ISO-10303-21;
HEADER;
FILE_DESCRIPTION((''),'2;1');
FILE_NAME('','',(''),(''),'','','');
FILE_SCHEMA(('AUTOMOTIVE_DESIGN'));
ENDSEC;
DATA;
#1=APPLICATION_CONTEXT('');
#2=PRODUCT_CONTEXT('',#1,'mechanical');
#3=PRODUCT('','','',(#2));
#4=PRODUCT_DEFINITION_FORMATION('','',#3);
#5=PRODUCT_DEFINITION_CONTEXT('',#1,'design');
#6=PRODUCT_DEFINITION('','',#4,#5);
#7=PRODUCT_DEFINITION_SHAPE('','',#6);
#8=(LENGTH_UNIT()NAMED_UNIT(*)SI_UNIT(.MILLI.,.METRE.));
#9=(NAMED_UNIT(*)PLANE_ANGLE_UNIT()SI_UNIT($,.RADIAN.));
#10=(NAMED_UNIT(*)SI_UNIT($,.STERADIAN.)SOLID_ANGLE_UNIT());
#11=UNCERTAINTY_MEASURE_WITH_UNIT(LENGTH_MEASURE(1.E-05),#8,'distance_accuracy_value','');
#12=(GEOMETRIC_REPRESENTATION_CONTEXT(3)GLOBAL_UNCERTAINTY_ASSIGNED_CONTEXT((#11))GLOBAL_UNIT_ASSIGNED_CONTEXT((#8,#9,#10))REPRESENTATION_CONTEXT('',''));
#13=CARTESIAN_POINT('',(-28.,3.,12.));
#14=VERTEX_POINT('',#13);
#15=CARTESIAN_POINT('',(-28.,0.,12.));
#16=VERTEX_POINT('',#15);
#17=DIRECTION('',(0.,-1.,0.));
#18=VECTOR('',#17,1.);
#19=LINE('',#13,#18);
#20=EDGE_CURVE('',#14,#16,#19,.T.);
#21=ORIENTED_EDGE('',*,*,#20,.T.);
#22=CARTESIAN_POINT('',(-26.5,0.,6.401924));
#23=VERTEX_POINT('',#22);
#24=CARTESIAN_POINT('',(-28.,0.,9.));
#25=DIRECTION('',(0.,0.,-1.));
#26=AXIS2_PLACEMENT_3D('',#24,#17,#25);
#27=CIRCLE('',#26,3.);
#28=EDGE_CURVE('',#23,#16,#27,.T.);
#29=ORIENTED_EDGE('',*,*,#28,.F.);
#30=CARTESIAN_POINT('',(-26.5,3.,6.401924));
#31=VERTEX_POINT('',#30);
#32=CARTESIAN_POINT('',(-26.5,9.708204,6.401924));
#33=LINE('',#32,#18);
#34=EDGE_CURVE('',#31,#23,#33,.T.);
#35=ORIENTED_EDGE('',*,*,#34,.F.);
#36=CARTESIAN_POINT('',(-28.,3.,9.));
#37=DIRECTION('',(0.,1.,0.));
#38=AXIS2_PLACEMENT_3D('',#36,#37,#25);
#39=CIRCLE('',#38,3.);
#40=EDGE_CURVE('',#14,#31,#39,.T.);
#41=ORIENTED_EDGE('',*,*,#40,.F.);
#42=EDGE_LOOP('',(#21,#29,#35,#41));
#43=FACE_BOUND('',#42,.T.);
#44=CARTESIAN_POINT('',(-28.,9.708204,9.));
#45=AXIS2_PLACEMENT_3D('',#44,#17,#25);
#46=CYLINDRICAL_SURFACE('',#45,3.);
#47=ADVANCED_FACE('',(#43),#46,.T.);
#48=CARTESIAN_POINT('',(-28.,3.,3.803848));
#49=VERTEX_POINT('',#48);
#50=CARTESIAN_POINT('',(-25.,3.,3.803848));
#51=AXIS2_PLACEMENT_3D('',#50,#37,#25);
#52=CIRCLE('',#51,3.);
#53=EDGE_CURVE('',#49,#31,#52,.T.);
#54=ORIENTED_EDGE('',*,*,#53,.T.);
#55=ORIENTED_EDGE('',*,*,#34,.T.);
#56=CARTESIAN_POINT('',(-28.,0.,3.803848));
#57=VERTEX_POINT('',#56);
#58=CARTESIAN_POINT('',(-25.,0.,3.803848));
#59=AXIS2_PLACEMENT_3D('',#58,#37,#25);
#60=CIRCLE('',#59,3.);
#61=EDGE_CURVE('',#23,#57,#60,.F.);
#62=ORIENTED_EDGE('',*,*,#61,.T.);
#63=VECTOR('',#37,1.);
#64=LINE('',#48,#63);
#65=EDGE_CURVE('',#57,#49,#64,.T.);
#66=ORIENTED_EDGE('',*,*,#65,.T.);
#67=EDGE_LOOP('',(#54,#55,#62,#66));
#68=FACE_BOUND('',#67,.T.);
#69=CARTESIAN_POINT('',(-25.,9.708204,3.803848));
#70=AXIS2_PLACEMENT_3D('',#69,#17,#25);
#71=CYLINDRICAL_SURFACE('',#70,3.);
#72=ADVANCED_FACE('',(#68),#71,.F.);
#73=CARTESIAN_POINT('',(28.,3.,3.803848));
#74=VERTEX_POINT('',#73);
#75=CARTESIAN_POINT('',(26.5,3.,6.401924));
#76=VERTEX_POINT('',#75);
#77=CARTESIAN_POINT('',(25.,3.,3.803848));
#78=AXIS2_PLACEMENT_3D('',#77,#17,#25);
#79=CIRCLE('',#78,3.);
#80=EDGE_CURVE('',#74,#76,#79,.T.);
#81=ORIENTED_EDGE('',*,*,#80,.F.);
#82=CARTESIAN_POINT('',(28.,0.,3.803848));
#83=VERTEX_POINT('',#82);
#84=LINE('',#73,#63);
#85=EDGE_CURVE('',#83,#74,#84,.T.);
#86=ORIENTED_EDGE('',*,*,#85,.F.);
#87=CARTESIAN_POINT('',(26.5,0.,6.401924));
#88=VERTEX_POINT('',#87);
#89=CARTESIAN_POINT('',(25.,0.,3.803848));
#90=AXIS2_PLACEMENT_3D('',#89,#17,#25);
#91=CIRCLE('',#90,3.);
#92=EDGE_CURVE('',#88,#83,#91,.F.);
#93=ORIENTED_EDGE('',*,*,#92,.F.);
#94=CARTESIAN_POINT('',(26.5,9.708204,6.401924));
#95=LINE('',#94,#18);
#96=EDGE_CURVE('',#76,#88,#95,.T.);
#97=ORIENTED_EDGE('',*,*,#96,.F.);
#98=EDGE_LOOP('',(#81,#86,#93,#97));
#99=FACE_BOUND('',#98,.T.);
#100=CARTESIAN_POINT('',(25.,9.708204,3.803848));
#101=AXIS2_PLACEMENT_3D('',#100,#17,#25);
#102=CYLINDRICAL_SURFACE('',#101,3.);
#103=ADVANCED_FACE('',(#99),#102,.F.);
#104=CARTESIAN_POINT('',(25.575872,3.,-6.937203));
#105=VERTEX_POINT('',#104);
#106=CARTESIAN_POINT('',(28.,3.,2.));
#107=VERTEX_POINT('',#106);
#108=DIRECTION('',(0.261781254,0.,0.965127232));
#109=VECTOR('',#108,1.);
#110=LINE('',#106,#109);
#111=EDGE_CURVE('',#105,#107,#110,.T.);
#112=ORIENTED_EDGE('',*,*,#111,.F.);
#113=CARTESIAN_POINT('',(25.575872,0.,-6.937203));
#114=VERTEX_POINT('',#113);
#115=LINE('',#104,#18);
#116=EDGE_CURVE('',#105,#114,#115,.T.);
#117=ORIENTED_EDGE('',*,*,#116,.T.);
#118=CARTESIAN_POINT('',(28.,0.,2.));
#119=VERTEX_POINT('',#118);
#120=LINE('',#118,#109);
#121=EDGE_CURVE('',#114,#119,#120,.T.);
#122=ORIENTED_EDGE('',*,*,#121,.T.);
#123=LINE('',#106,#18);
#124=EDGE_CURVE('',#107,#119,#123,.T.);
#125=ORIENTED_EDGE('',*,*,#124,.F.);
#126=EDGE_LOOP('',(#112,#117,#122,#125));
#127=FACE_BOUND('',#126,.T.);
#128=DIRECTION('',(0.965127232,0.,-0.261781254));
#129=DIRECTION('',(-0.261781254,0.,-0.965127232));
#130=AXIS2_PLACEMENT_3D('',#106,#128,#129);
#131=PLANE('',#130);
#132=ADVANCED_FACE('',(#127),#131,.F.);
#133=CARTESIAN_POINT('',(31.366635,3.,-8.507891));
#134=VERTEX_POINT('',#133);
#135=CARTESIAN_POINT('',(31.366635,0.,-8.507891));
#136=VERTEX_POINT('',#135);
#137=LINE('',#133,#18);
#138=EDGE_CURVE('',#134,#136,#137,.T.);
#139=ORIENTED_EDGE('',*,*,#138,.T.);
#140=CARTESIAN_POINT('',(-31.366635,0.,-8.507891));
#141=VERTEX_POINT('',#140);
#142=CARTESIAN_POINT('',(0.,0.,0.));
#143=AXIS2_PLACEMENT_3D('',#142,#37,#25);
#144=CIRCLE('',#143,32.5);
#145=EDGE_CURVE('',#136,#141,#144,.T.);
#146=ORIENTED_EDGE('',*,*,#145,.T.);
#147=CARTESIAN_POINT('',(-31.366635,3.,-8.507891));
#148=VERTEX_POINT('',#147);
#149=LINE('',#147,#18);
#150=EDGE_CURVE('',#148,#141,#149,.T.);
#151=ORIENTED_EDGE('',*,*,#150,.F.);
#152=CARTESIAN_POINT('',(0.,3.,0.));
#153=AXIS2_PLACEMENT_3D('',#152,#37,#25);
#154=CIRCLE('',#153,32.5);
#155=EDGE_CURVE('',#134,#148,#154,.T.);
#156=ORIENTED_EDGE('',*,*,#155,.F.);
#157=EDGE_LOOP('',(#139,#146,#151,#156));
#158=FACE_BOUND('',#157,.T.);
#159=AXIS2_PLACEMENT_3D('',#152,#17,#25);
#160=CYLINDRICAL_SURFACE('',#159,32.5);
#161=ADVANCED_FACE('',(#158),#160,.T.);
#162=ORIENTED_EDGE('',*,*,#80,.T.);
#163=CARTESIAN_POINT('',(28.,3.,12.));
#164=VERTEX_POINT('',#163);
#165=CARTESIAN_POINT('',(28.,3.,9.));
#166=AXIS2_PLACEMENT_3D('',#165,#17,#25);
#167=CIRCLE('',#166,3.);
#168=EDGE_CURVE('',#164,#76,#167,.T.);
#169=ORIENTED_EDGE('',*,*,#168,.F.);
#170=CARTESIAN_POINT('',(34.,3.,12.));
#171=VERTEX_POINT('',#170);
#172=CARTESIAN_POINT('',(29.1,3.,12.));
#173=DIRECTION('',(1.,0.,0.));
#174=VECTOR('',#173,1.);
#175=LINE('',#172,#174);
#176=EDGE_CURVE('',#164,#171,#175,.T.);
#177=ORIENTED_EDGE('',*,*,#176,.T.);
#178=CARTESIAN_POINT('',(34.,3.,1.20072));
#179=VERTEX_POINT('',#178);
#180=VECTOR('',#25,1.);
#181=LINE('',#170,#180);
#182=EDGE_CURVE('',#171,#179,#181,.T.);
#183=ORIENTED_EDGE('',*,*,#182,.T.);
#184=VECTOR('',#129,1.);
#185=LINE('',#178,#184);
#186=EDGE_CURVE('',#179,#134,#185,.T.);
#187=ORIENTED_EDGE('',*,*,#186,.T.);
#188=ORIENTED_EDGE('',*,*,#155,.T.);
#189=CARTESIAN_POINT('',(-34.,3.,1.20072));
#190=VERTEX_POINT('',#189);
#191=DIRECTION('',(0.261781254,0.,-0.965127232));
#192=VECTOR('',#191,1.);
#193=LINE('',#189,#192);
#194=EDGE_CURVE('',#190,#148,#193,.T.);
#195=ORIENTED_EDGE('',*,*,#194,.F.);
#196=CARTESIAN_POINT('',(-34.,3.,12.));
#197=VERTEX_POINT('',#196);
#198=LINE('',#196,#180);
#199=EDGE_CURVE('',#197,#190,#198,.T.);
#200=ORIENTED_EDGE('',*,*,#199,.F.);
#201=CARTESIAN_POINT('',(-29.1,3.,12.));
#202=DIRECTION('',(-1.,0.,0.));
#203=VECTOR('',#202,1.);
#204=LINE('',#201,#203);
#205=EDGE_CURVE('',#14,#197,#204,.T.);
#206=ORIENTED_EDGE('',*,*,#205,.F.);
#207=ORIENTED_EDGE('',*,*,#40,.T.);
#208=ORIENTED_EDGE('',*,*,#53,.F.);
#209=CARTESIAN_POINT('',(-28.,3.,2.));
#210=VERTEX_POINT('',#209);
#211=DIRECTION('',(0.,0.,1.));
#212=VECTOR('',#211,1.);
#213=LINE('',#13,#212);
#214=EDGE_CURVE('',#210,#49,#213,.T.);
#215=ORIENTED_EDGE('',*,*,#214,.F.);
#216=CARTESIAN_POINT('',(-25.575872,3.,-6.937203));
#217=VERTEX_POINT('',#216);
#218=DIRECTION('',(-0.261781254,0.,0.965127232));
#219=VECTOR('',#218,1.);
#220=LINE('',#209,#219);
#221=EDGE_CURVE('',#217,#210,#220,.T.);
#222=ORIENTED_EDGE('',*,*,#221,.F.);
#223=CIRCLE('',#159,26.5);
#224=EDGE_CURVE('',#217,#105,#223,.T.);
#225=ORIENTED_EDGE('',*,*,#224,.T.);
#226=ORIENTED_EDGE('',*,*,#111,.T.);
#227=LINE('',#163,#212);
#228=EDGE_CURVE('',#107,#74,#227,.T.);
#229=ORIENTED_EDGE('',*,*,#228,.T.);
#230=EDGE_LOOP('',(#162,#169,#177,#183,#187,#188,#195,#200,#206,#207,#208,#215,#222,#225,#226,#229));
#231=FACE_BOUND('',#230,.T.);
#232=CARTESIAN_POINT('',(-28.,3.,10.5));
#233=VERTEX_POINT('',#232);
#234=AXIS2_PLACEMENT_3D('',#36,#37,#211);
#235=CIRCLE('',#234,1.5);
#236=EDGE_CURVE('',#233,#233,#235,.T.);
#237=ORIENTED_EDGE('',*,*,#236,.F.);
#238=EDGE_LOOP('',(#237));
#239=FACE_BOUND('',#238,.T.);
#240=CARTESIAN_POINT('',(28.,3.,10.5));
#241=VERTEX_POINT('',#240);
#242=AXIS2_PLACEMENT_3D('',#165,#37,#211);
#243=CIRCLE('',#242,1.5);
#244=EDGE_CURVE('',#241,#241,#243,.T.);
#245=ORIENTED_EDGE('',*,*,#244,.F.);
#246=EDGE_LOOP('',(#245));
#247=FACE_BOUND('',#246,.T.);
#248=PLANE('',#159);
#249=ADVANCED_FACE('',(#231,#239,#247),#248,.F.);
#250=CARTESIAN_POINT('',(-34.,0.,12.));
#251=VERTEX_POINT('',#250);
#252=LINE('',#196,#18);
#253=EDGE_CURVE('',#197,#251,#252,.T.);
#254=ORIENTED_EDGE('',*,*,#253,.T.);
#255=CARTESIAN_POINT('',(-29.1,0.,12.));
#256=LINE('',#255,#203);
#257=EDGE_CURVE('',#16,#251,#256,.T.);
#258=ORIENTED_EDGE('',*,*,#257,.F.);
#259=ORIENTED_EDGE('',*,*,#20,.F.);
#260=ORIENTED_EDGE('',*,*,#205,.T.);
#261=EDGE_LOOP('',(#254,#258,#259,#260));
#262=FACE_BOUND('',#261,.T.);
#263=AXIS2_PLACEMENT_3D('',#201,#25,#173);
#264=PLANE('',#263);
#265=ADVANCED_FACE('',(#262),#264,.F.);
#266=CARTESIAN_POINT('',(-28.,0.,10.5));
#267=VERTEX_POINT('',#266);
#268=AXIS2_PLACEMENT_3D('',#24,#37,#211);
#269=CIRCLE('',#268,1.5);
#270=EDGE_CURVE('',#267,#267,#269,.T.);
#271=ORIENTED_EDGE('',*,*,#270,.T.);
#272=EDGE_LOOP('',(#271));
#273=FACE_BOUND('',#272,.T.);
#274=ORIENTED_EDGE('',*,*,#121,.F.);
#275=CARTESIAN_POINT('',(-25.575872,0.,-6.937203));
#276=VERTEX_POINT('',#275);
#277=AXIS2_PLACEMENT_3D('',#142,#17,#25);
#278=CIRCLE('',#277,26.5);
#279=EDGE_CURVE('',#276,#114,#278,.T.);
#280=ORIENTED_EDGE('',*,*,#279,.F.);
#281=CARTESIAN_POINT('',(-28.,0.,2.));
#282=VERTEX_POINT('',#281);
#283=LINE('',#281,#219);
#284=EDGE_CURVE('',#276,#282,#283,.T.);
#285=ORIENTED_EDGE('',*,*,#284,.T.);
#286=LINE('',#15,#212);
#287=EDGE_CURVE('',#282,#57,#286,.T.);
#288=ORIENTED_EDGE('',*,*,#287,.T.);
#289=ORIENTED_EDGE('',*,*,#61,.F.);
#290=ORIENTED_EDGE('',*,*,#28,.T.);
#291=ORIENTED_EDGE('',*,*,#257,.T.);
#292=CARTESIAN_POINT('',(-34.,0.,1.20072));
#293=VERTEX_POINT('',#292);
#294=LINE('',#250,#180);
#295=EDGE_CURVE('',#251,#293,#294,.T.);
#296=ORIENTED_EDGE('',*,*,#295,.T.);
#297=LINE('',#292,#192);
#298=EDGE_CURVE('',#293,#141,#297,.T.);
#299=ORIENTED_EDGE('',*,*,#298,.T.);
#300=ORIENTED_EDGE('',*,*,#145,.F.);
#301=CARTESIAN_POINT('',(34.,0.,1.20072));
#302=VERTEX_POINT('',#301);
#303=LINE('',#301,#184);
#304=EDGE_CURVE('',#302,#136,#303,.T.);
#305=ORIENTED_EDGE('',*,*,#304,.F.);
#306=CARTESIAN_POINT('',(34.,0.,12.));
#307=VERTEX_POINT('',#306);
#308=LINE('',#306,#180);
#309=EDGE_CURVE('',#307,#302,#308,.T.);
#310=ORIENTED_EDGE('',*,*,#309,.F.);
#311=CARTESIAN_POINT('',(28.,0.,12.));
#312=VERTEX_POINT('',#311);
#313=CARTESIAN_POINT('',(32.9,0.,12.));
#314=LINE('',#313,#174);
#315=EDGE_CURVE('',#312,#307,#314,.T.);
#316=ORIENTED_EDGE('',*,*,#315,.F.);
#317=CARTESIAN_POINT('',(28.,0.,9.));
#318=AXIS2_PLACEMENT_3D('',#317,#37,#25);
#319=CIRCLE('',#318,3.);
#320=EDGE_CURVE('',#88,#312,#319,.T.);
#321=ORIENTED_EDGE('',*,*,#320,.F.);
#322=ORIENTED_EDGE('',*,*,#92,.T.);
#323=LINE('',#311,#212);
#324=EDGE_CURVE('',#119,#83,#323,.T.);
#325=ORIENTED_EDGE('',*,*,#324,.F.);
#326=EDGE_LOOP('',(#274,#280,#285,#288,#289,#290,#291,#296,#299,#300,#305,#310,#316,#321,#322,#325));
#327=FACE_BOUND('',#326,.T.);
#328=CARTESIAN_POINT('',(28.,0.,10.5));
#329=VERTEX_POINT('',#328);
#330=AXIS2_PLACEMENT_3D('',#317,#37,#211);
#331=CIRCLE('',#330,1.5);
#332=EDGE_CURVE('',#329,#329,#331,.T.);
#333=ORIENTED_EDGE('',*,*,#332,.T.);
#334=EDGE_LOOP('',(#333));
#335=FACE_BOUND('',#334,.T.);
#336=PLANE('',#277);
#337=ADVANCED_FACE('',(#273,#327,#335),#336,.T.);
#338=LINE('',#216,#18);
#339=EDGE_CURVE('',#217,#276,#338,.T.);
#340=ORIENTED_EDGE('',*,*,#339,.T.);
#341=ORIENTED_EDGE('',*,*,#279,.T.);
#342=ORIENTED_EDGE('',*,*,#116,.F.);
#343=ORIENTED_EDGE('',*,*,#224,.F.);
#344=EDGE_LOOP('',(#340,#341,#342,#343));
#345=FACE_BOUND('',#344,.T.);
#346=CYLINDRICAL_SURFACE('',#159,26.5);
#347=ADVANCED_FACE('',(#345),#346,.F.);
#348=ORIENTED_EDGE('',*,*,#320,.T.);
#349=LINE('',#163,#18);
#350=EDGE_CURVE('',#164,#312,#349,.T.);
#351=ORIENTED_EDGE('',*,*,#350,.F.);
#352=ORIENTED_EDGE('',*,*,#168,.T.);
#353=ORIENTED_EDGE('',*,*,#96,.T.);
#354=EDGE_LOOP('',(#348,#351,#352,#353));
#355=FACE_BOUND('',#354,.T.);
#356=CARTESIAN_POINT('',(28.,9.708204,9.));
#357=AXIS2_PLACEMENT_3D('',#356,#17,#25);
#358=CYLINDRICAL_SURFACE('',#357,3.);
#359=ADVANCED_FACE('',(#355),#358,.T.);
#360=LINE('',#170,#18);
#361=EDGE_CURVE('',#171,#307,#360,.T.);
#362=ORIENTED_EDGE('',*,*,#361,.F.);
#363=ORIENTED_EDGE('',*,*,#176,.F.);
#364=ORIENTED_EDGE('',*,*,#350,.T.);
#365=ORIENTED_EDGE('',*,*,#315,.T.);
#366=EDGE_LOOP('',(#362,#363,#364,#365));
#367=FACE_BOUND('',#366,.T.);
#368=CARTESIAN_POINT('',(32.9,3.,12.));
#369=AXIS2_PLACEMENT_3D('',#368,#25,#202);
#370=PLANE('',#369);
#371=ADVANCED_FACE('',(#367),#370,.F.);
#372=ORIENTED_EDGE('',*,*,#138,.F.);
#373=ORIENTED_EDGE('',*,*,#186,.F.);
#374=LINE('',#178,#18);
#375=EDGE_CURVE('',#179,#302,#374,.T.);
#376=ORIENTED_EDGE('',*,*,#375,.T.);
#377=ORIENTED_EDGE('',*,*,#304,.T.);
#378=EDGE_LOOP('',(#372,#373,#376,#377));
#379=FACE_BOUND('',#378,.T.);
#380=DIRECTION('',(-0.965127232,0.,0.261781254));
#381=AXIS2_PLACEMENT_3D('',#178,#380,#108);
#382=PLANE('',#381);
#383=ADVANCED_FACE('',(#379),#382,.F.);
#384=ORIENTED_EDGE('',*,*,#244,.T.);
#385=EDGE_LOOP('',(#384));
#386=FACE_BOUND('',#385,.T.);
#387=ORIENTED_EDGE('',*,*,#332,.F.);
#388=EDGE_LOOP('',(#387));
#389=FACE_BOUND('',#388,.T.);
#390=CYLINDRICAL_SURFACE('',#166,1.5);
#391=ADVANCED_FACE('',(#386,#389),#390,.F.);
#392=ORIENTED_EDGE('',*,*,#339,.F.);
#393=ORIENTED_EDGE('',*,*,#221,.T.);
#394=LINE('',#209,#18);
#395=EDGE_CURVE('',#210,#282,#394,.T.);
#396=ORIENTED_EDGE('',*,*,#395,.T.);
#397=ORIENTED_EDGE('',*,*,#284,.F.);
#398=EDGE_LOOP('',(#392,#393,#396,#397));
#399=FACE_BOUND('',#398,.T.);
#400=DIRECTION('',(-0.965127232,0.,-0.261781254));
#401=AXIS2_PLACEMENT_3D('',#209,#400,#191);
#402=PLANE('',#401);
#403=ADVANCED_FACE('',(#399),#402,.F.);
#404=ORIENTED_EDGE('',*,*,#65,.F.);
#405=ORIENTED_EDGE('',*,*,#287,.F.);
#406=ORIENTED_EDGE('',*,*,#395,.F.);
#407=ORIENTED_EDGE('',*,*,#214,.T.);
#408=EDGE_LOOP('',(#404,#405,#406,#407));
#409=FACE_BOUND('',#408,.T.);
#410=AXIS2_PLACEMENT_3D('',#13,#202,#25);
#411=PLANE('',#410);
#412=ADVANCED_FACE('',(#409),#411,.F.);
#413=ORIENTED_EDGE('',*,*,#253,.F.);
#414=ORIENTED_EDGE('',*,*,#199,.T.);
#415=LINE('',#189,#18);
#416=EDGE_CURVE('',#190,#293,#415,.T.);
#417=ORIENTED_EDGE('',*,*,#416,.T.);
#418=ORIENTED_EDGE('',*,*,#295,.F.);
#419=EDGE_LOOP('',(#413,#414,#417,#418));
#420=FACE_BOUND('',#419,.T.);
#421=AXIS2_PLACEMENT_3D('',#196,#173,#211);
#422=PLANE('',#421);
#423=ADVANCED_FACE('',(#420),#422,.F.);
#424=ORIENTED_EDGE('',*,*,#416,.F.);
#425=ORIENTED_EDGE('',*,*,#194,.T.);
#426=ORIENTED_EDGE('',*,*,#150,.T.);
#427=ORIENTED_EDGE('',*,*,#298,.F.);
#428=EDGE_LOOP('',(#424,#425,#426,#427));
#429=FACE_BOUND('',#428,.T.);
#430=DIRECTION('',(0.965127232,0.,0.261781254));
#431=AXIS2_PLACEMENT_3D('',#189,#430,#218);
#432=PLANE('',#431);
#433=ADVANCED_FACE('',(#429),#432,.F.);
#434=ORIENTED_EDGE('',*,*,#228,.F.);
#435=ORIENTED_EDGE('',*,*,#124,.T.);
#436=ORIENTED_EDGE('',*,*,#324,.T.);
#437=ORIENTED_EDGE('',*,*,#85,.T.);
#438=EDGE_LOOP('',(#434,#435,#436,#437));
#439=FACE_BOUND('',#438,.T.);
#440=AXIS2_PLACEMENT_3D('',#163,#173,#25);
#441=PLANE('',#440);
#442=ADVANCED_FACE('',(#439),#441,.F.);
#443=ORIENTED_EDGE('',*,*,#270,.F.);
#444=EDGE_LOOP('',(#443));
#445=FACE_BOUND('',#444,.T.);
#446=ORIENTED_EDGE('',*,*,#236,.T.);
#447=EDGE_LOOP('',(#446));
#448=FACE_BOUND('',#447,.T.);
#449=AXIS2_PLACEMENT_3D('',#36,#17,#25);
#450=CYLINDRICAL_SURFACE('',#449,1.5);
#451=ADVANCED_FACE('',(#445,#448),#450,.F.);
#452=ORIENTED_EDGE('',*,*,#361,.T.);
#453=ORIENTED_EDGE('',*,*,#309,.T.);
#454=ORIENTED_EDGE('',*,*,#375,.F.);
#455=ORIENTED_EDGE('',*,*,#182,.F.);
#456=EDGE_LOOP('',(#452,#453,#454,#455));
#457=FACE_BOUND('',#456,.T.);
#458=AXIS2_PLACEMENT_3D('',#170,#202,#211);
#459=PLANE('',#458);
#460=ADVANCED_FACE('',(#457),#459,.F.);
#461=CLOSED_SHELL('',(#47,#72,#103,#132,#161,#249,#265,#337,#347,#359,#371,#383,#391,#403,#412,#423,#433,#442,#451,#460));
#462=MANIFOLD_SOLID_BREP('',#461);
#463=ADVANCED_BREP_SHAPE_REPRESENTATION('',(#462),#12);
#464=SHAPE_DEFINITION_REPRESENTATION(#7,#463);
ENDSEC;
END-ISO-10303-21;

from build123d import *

# Parameters (mm, degrees)
EYELID_OUTLINE_R   = 1.25
EYELID_DEPTH       = 3
SKETCH1_R          = 1.5
SKETCH1_W          = 68
SKETCH1_H          = 13
CUT_EXTRUDE1_DEPTH = 48.130138977


# Read off the part's stored shape, not the designer's step: eyelid
with BuildPart() as part:
    # eyelid outline → eyelid (new body)
    with BuildSketch(Plane(origin=(0, 0, 0), x_dir=(1, 0, 0), z_dir=(0, 1, 0))):
        with BuildLine():
            Line((28, -2), (28, -3.803847577))
            ThreePointArc((28, -3.803847577), (27.598076211, -5.303847577), (26.5, -6.401923789))
            ThreePointArc((26.5, -6.401923789), (25.102222521, -9.776457136), (28, -12))
            Line((28, -12), (29.1, -12))
            Line((29.1, -12), (29.1, -16))
            Line((29.1, -16), (30.9, -25))
            Line((30.9, -25), (32.4, -25))
            Line((32.4, -25), (33.9, -23.5))
            Line((33.9, -23.5), (33.9, -22.5))
            Line((33.9, -22.5), (33.4, -22))
            Line((33.4, -22), (32.9, -21))
            Line((32.9, -21), (32.9, -12))
            Line((32.9, -12), (34, -12))
            Line((34, -12), (34, -1.200719678))
            Line((34, -1.200719678), (31.366635055, 8.507890769))
            ThreePointArc((31.366635055, 8.507890769), (0, 32.5), (-31.366635055, 8.507890769))
            Line((-31.366635055, 8.507890769), (-34, -1.200719678))
            Line((-34, -1.200719678), (-34, -12))
            Line((-34, -12), (-32.9, -12))
            Line((-32.9, -12), (-32.9, -21))
            Line((-32.9, -21), (-33.4, -22))
            Line((-33.4, -22), (-33.9, -22.5))
            Line((-33.9, -22.5), (-33.9, -23.5))
            Line((-33.9, -23.5), (-32.4, -25))
            Line((-32.4, -25), (-30.9, -25))
            Line((-30.9, -25), (-29.1, -16))
            Line((-29.1, -16), (-29.1, -12))
            Line((-29.1, -12), (-28, -12))
            ThreePointArc((-28, -12), (-25.102222521, -9.776457136), (-26.5, -6.401923789))
            ThreePointArc((-26.5, -6.401923789), (-27.598076211, -5.303847577), (-28, -3.803847577))
            Line((-28, -3.803847577), (-28, -2))
            Line((-28, -2), (-25.57587166, 6.937203242))
            ThreePointArc((-25.57587166, 6.937203242), (0, 26.5), (25.57587166, 6.937203242))
            Line((25.57587166, 6.937203242), (28, -2))
        make_face()
        with Locations((-28, -9)):
            Circle(EYELID_OUTLINE_R, mode=Mode.SUBTRACT)
        with Locations((28, -9)):
            Circle(EYELID_OUTLINE_R, mode=Mode.SUBTRACT)
    extrude(amount=EYELID_DEPTH)

    # Sketch1 → Cut-Extrude1 (cut, through all)
    with BuildSketch(Plane(origin=(0, 0, 0), x_dir=(1, 0, 0), z_dir=(0, 1, 0))):
        with Locations(Location((-28, -9, 0), (0, 0, 270))):
            Circle(SKETCH1_R)
        with Locations(Location((28, -9, 0), (0, 0, 270))):
            Circle(SKETCH1_R)
        with Locations((0, -18.5)):
            Rectangle(SKETCH1_W, SKETCH1_H)
    extrude(amount=CUT_EXTRUDE1_DEPTH, mode=Mode.SUBTRACT)


solid = part.part
